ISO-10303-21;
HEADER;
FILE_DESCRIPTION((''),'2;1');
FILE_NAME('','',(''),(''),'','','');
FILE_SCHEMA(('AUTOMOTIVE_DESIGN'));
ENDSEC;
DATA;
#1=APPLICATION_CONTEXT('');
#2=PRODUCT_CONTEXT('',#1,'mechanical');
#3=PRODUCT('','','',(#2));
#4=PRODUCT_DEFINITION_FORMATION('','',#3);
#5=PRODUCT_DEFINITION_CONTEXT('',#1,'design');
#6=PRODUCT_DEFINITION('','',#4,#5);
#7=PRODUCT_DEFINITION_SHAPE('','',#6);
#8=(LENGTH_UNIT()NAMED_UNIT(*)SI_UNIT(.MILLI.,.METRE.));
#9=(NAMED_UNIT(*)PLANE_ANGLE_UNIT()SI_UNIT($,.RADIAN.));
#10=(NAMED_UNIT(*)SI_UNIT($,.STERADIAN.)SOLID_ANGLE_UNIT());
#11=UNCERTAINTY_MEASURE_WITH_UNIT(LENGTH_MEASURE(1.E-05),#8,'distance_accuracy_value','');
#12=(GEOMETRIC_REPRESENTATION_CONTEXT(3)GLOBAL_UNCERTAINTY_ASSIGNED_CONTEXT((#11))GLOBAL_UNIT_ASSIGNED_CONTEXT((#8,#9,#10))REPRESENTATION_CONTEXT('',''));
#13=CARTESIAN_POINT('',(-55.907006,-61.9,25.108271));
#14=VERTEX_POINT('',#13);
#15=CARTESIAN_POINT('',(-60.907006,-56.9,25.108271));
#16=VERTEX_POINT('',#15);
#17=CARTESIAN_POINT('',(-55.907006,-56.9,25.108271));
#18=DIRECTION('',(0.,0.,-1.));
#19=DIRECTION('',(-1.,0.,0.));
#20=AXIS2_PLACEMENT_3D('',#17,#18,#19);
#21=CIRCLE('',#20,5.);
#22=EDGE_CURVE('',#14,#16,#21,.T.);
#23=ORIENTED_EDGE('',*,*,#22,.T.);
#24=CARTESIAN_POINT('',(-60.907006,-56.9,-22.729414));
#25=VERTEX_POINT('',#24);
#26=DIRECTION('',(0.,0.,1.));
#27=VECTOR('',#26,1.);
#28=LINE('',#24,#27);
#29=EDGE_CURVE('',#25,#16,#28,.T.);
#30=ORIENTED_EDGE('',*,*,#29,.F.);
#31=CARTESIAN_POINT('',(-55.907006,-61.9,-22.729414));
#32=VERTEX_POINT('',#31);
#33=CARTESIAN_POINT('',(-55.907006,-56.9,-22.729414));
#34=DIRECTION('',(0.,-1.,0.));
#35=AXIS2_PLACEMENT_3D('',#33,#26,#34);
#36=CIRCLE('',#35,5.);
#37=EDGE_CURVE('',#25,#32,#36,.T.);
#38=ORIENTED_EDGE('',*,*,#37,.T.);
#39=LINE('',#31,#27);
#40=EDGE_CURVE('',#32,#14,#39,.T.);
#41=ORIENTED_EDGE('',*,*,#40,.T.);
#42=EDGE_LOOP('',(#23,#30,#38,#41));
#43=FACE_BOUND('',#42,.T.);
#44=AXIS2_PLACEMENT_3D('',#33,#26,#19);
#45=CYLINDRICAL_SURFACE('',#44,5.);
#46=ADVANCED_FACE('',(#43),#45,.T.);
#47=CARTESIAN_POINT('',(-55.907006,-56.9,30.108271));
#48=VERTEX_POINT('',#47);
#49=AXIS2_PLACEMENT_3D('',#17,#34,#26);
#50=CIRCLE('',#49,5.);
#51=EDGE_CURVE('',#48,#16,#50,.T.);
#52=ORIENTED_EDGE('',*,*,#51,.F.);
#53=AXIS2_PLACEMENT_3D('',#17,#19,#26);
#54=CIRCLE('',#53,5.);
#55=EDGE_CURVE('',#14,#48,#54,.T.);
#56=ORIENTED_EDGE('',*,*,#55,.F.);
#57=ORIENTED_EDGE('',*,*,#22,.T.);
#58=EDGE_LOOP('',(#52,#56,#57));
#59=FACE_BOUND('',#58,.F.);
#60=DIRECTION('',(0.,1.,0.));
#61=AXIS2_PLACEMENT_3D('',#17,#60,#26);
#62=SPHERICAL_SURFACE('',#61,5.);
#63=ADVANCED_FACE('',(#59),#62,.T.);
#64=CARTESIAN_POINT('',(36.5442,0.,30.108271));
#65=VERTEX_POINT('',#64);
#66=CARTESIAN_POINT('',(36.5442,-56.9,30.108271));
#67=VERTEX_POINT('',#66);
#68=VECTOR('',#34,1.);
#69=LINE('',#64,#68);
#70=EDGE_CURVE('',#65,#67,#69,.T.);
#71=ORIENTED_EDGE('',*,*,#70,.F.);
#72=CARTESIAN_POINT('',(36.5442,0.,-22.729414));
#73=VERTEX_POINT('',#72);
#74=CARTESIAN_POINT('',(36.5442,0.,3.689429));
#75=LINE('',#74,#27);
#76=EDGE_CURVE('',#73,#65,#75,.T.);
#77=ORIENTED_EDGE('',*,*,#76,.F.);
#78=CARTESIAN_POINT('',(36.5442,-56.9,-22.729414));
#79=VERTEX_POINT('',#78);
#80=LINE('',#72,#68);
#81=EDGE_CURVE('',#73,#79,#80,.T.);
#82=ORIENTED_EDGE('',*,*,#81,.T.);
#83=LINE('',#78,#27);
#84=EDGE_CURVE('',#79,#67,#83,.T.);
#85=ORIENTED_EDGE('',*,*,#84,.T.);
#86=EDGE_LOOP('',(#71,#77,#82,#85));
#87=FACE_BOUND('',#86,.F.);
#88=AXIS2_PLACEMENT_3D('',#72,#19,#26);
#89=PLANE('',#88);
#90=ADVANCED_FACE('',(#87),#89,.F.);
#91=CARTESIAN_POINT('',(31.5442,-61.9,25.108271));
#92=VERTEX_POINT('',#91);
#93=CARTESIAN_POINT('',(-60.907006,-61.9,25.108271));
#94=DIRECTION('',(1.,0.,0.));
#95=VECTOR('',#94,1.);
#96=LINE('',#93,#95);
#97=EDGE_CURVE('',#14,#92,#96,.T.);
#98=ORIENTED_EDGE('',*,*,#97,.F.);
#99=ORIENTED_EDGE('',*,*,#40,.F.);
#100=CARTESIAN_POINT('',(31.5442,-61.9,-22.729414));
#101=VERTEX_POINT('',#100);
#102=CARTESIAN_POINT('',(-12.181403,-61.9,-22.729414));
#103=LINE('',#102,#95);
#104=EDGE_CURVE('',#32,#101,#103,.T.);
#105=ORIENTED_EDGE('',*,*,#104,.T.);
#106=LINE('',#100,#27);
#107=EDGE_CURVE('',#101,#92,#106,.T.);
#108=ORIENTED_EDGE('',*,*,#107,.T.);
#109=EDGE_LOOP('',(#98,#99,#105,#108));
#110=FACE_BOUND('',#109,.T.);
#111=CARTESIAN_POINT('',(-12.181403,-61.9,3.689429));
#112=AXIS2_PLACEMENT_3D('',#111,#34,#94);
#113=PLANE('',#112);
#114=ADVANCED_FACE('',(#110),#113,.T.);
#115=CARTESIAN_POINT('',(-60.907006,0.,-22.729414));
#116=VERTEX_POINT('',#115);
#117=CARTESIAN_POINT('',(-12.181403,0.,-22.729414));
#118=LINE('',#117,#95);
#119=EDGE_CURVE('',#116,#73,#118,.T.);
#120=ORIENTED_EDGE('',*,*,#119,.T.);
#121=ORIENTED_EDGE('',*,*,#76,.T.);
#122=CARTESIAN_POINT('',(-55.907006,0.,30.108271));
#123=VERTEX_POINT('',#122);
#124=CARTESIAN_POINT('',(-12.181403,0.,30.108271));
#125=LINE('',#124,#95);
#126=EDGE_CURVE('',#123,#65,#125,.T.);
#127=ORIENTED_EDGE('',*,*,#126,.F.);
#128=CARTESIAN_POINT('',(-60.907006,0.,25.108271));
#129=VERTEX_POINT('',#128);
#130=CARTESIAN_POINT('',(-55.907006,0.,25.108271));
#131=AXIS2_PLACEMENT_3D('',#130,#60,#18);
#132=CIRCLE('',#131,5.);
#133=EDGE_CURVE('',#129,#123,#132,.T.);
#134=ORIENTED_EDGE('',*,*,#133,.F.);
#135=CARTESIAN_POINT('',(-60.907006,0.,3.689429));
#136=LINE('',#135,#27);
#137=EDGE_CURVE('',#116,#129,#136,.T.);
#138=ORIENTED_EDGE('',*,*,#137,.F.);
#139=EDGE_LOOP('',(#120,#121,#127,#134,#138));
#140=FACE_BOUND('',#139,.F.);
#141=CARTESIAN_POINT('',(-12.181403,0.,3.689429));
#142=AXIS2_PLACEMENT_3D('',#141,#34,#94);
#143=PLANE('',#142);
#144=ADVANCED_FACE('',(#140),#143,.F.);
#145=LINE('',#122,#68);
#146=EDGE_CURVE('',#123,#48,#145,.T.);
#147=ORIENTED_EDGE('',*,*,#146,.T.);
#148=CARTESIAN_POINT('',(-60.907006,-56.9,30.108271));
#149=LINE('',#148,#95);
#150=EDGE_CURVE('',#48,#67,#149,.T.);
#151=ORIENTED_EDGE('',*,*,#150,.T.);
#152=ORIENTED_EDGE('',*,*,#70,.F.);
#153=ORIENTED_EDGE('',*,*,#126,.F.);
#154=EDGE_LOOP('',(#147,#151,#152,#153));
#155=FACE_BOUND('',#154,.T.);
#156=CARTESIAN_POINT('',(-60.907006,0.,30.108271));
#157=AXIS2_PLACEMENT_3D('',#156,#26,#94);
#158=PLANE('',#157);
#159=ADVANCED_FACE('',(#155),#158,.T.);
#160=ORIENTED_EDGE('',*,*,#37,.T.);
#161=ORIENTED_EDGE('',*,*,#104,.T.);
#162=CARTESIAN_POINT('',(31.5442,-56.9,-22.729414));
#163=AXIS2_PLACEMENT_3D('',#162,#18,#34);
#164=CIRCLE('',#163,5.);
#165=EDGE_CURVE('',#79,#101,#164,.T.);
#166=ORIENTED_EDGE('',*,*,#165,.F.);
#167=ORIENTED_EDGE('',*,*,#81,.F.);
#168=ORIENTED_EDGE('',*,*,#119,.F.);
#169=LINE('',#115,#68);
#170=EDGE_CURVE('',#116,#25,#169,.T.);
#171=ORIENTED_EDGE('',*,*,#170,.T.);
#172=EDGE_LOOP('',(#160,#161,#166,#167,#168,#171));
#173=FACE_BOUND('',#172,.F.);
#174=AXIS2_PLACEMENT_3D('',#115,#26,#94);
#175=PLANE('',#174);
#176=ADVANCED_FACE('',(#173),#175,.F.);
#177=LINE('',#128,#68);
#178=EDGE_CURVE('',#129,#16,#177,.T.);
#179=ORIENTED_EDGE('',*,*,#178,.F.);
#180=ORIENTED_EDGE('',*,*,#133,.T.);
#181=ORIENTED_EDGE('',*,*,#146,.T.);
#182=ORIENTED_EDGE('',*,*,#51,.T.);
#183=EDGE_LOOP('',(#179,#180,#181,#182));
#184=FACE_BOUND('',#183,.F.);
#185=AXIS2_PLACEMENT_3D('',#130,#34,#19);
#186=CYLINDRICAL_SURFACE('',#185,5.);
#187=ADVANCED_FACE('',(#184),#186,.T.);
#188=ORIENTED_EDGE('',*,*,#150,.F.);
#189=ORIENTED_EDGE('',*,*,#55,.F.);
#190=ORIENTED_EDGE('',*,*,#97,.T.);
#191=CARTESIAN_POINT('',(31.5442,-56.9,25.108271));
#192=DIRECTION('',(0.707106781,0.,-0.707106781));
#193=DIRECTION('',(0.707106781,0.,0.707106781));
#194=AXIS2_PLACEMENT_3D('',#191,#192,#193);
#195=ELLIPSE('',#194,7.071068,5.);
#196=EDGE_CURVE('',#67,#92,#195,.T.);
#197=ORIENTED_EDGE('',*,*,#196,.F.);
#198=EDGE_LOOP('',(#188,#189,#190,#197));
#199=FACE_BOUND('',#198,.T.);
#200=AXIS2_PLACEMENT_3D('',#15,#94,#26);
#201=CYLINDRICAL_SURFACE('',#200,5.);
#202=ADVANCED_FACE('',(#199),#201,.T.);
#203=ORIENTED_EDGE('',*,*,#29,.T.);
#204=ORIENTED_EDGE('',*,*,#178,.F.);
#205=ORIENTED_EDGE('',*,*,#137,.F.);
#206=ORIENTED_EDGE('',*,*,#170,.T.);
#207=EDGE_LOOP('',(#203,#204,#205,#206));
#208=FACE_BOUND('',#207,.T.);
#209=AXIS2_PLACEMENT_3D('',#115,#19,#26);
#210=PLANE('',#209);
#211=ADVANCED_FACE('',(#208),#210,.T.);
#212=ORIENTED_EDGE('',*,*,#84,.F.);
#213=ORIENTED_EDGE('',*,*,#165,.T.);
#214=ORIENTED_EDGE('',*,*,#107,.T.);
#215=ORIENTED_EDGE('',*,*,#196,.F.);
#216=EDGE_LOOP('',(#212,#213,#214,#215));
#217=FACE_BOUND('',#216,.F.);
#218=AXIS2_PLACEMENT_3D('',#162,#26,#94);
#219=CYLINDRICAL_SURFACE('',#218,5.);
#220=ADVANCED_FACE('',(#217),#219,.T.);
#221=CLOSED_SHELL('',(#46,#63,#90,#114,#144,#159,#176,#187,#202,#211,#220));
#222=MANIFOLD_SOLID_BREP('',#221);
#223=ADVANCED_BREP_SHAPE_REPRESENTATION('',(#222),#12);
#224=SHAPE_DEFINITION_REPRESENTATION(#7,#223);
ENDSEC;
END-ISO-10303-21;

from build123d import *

# Parameters (mm, degrees)
F0_W     = 97.4512062967
F0_H     = 52.8376847506
F1_DEPTH = 61.9
F4_R     = 5


# Not quite as in the source:
# - a feature of the source that left no trace in its solid (it failed there, or was rolled back) is left out


with BuildPart() as f1:
    # F0 (on Front) → F1 (new body)
    with BuildSketch(Plane.XZ):
        with Locations((-12.1814031154, 3.6894287914)):
            Rectangle(F0_W, F0_H)
    extrude(amount=F1_DEPTH)

    # F4
    f4_edges = [f1.edges().sort_by_distance(p)[0] for p in [
        (-60.907006, -30.95, 30.108271),
        (-12.181403, -61.9, 30.108271),
        (-60.907006, -61.9, 3.689429),
        (36.5442, -61.9, 3.689429),
    ]]
    fillet(f4_edges, radius=F4_R)


solid = f1.part
